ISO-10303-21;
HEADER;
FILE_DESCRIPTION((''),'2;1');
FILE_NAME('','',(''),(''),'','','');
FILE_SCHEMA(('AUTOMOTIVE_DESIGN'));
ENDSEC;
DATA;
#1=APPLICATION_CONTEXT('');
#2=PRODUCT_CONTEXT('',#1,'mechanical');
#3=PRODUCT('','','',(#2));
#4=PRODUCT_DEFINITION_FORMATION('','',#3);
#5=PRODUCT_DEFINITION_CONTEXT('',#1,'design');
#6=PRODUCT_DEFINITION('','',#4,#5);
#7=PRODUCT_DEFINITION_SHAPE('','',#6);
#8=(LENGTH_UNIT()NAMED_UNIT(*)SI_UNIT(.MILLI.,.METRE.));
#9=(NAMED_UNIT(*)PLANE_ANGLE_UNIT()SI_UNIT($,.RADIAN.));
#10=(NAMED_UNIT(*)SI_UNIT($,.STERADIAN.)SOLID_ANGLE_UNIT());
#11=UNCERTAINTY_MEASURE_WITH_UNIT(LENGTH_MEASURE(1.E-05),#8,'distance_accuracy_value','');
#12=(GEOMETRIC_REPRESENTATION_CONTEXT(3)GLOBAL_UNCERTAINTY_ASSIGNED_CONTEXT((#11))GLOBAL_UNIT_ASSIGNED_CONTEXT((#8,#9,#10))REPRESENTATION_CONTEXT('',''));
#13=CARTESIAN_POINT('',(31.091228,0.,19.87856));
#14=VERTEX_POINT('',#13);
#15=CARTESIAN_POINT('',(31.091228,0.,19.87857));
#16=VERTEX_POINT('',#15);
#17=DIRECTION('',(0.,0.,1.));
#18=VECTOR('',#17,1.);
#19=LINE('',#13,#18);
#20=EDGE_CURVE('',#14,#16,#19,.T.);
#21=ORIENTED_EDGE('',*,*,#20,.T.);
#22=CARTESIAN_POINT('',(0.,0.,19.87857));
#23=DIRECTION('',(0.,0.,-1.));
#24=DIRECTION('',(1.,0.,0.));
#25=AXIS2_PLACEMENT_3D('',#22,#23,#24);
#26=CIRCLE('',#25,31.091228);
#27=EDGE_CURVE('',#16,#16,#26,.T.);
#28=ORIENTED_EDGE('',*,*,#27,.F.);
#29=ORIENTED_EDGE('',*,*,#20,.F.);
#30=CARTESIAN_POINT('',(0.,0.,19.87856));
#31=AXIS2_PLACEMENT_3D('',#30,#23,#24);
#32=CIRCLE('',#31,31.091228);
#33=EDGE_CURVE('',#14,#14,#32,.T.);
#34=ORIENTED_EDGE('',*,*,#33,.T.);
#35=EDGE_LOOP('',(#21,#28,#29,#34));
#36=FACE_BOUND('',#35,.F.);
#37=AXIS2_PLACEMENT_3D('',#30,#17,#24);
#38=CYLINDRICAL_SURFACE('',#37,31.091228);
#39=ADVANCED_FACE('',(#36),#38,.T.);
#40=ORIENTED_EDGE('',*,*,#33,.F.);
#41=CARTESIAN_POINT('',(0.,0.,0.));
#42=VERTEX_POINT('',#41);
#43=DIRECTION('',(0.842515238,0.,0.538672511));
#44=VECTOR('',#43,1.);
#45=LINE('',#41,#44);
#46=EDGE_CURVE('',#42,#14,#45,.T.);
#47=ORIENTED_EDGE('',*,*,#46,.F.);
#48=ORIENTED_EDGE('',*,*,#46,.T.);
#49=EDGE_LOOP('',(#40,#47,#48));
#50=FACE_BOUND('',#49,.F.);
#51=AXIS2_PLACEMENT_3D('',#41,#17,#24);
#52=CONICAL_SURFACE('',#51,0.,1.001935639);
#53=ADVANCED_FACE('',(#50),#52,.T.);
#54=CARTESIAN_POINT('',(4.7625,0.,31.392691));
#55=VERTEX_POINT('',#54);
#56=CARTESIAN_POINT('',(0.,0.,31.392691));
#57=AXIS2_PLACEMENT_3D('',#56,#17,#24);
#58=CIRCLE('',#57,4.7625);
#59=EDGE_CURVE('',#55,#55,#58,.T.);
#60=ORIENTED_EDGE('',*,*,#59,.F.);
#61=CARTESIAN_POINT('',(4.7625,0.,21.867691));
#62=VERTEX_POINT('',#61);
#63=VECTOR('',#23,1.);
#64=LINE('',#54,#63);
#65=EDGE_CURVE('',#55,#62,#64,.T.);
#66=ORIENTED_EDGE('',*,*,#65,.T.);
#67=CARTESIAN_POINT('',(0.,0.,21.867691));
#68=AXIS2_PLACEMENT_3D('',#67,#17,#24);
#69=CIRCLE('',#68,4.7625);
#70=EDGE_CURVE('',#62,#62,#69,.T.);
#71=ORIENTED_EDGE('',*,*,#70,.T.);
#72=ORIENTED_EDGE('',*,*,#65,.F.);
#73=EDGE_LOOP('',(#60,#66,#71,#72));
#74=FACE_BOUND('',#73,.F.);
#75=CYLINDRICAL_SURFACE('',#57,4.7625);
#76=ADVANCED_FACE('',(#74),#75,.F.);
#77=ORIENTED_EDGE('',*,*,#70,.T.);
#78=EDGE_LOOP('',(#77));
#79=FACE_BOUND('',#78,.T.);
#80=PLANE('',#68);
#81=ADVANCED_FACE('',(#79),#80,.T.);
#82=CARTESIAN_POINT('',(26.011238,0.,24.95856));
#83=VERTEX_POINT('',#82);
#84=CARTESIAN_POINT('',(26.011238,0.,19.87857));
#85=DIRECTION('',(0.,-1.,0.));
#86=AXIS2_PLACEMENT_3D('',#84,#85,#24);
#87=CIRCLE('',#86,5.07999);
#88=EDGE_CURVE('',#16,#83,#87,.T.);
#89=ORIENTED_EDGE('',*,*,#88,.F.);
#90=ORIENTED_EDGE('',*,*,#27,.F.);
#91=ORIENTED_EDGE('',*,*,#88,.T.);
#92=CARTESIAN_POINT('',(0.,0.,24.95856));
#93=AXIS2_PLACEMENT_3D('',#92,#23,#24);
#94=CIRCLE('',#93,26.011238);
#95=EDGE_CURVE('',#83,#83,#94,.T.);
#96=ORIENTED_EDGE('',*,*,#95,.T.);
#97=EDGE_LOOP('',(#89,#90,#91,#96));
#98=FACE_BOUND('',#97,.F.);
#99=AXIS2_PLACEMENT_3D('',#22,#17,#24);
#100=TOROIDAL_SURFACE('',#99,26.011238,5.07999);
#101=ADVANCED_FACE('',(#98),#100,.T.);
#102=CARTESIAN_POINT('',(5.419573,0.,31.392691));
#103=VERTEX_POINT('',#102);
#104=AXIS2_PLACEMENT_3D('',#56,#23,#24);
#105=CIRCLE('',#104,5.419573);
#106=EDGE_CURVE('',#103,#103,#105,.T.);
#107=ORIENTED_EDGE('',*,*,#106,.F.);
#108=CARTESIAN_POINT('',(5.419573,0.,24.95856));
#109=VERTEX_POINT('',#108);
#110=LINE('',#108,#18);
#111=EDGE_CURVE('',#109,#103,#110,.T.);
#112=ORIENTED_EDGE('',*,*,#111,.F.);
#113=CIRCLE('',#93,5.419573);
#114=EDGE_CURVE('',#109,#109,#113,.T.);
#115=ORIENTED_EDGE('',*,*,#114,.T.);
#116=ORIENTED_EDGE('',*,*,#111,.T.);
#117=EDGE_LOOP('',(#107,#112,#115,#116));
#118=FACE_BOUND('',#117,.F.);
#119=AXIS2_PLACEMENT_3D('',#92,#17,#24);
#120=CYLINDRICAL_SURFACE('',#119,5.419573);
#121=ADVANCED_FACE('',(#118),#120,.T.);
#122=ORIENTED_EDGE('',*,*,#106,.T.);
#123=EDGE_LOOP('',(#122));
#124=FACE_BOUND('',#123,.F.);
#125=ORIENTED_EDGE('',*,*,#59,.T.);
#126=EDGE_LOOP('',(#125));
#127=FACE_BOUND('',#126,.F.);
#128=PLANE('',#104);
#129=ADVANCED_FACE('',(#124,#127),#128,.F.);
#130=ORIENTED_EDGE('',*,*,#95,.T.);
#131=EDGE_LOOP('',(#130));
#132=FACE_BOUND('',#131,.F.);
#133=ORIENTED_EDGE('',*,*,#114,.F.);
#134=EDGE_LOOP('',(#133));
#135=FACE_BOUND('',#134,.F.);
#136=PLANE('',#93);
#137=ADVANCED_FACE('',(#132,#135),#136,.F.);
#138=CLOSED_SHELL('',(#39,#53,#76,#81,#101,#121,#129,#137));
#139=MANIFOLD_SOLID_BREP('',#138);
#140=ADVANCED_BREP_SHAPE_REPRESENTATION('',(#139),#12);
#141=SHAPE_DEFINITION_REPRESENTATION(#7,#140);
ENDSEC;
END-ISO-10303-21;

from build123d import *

# Parameters (mm, degrees)
F2_R     = 4.7625
F3_DEPTH = 9.525
F4_R     = 5.07999


# Not quite as in the source:
# - a fillet or chamfer is up to 0.001 mm smaller than in the source, because OpenCascade refuses the exact size


with BuildPart() as f1:
    # F0 (on Front) → F1 (revolve)
    with BuildSketch(Plane.XZ):
        Polygon((0, 31.392690606), (0, 0), (31.0912281275, 19.8785602432), (31.0912281275, 24.9585602432), (5.4195728153, 24.9585602432), (5.4195728153, 31.392690606), align=None)
    revolve(axis=Axis((0, 0, 15.696345303), (0, 0, -1)))

    # F2 (on face) → F3 (cut)
    with BuildSketch(Plane.XY.offset(31.392690606)):
        Circle(F2_R)
    extrude(amount=-F3_DEPTH, mode=Mode.SUBTRACT)

    # F4 (radius 5.08 in the source; OpenCascade refuses exactly that, so slightly less here)
    f4_edges = [f1.edges().sort_by_distance(p)[0] for p in [
        (-31.091228, 0, 24.95856),
    ]]
    fillet(f4_edges, radius=F4_R)


solid = f1.part
